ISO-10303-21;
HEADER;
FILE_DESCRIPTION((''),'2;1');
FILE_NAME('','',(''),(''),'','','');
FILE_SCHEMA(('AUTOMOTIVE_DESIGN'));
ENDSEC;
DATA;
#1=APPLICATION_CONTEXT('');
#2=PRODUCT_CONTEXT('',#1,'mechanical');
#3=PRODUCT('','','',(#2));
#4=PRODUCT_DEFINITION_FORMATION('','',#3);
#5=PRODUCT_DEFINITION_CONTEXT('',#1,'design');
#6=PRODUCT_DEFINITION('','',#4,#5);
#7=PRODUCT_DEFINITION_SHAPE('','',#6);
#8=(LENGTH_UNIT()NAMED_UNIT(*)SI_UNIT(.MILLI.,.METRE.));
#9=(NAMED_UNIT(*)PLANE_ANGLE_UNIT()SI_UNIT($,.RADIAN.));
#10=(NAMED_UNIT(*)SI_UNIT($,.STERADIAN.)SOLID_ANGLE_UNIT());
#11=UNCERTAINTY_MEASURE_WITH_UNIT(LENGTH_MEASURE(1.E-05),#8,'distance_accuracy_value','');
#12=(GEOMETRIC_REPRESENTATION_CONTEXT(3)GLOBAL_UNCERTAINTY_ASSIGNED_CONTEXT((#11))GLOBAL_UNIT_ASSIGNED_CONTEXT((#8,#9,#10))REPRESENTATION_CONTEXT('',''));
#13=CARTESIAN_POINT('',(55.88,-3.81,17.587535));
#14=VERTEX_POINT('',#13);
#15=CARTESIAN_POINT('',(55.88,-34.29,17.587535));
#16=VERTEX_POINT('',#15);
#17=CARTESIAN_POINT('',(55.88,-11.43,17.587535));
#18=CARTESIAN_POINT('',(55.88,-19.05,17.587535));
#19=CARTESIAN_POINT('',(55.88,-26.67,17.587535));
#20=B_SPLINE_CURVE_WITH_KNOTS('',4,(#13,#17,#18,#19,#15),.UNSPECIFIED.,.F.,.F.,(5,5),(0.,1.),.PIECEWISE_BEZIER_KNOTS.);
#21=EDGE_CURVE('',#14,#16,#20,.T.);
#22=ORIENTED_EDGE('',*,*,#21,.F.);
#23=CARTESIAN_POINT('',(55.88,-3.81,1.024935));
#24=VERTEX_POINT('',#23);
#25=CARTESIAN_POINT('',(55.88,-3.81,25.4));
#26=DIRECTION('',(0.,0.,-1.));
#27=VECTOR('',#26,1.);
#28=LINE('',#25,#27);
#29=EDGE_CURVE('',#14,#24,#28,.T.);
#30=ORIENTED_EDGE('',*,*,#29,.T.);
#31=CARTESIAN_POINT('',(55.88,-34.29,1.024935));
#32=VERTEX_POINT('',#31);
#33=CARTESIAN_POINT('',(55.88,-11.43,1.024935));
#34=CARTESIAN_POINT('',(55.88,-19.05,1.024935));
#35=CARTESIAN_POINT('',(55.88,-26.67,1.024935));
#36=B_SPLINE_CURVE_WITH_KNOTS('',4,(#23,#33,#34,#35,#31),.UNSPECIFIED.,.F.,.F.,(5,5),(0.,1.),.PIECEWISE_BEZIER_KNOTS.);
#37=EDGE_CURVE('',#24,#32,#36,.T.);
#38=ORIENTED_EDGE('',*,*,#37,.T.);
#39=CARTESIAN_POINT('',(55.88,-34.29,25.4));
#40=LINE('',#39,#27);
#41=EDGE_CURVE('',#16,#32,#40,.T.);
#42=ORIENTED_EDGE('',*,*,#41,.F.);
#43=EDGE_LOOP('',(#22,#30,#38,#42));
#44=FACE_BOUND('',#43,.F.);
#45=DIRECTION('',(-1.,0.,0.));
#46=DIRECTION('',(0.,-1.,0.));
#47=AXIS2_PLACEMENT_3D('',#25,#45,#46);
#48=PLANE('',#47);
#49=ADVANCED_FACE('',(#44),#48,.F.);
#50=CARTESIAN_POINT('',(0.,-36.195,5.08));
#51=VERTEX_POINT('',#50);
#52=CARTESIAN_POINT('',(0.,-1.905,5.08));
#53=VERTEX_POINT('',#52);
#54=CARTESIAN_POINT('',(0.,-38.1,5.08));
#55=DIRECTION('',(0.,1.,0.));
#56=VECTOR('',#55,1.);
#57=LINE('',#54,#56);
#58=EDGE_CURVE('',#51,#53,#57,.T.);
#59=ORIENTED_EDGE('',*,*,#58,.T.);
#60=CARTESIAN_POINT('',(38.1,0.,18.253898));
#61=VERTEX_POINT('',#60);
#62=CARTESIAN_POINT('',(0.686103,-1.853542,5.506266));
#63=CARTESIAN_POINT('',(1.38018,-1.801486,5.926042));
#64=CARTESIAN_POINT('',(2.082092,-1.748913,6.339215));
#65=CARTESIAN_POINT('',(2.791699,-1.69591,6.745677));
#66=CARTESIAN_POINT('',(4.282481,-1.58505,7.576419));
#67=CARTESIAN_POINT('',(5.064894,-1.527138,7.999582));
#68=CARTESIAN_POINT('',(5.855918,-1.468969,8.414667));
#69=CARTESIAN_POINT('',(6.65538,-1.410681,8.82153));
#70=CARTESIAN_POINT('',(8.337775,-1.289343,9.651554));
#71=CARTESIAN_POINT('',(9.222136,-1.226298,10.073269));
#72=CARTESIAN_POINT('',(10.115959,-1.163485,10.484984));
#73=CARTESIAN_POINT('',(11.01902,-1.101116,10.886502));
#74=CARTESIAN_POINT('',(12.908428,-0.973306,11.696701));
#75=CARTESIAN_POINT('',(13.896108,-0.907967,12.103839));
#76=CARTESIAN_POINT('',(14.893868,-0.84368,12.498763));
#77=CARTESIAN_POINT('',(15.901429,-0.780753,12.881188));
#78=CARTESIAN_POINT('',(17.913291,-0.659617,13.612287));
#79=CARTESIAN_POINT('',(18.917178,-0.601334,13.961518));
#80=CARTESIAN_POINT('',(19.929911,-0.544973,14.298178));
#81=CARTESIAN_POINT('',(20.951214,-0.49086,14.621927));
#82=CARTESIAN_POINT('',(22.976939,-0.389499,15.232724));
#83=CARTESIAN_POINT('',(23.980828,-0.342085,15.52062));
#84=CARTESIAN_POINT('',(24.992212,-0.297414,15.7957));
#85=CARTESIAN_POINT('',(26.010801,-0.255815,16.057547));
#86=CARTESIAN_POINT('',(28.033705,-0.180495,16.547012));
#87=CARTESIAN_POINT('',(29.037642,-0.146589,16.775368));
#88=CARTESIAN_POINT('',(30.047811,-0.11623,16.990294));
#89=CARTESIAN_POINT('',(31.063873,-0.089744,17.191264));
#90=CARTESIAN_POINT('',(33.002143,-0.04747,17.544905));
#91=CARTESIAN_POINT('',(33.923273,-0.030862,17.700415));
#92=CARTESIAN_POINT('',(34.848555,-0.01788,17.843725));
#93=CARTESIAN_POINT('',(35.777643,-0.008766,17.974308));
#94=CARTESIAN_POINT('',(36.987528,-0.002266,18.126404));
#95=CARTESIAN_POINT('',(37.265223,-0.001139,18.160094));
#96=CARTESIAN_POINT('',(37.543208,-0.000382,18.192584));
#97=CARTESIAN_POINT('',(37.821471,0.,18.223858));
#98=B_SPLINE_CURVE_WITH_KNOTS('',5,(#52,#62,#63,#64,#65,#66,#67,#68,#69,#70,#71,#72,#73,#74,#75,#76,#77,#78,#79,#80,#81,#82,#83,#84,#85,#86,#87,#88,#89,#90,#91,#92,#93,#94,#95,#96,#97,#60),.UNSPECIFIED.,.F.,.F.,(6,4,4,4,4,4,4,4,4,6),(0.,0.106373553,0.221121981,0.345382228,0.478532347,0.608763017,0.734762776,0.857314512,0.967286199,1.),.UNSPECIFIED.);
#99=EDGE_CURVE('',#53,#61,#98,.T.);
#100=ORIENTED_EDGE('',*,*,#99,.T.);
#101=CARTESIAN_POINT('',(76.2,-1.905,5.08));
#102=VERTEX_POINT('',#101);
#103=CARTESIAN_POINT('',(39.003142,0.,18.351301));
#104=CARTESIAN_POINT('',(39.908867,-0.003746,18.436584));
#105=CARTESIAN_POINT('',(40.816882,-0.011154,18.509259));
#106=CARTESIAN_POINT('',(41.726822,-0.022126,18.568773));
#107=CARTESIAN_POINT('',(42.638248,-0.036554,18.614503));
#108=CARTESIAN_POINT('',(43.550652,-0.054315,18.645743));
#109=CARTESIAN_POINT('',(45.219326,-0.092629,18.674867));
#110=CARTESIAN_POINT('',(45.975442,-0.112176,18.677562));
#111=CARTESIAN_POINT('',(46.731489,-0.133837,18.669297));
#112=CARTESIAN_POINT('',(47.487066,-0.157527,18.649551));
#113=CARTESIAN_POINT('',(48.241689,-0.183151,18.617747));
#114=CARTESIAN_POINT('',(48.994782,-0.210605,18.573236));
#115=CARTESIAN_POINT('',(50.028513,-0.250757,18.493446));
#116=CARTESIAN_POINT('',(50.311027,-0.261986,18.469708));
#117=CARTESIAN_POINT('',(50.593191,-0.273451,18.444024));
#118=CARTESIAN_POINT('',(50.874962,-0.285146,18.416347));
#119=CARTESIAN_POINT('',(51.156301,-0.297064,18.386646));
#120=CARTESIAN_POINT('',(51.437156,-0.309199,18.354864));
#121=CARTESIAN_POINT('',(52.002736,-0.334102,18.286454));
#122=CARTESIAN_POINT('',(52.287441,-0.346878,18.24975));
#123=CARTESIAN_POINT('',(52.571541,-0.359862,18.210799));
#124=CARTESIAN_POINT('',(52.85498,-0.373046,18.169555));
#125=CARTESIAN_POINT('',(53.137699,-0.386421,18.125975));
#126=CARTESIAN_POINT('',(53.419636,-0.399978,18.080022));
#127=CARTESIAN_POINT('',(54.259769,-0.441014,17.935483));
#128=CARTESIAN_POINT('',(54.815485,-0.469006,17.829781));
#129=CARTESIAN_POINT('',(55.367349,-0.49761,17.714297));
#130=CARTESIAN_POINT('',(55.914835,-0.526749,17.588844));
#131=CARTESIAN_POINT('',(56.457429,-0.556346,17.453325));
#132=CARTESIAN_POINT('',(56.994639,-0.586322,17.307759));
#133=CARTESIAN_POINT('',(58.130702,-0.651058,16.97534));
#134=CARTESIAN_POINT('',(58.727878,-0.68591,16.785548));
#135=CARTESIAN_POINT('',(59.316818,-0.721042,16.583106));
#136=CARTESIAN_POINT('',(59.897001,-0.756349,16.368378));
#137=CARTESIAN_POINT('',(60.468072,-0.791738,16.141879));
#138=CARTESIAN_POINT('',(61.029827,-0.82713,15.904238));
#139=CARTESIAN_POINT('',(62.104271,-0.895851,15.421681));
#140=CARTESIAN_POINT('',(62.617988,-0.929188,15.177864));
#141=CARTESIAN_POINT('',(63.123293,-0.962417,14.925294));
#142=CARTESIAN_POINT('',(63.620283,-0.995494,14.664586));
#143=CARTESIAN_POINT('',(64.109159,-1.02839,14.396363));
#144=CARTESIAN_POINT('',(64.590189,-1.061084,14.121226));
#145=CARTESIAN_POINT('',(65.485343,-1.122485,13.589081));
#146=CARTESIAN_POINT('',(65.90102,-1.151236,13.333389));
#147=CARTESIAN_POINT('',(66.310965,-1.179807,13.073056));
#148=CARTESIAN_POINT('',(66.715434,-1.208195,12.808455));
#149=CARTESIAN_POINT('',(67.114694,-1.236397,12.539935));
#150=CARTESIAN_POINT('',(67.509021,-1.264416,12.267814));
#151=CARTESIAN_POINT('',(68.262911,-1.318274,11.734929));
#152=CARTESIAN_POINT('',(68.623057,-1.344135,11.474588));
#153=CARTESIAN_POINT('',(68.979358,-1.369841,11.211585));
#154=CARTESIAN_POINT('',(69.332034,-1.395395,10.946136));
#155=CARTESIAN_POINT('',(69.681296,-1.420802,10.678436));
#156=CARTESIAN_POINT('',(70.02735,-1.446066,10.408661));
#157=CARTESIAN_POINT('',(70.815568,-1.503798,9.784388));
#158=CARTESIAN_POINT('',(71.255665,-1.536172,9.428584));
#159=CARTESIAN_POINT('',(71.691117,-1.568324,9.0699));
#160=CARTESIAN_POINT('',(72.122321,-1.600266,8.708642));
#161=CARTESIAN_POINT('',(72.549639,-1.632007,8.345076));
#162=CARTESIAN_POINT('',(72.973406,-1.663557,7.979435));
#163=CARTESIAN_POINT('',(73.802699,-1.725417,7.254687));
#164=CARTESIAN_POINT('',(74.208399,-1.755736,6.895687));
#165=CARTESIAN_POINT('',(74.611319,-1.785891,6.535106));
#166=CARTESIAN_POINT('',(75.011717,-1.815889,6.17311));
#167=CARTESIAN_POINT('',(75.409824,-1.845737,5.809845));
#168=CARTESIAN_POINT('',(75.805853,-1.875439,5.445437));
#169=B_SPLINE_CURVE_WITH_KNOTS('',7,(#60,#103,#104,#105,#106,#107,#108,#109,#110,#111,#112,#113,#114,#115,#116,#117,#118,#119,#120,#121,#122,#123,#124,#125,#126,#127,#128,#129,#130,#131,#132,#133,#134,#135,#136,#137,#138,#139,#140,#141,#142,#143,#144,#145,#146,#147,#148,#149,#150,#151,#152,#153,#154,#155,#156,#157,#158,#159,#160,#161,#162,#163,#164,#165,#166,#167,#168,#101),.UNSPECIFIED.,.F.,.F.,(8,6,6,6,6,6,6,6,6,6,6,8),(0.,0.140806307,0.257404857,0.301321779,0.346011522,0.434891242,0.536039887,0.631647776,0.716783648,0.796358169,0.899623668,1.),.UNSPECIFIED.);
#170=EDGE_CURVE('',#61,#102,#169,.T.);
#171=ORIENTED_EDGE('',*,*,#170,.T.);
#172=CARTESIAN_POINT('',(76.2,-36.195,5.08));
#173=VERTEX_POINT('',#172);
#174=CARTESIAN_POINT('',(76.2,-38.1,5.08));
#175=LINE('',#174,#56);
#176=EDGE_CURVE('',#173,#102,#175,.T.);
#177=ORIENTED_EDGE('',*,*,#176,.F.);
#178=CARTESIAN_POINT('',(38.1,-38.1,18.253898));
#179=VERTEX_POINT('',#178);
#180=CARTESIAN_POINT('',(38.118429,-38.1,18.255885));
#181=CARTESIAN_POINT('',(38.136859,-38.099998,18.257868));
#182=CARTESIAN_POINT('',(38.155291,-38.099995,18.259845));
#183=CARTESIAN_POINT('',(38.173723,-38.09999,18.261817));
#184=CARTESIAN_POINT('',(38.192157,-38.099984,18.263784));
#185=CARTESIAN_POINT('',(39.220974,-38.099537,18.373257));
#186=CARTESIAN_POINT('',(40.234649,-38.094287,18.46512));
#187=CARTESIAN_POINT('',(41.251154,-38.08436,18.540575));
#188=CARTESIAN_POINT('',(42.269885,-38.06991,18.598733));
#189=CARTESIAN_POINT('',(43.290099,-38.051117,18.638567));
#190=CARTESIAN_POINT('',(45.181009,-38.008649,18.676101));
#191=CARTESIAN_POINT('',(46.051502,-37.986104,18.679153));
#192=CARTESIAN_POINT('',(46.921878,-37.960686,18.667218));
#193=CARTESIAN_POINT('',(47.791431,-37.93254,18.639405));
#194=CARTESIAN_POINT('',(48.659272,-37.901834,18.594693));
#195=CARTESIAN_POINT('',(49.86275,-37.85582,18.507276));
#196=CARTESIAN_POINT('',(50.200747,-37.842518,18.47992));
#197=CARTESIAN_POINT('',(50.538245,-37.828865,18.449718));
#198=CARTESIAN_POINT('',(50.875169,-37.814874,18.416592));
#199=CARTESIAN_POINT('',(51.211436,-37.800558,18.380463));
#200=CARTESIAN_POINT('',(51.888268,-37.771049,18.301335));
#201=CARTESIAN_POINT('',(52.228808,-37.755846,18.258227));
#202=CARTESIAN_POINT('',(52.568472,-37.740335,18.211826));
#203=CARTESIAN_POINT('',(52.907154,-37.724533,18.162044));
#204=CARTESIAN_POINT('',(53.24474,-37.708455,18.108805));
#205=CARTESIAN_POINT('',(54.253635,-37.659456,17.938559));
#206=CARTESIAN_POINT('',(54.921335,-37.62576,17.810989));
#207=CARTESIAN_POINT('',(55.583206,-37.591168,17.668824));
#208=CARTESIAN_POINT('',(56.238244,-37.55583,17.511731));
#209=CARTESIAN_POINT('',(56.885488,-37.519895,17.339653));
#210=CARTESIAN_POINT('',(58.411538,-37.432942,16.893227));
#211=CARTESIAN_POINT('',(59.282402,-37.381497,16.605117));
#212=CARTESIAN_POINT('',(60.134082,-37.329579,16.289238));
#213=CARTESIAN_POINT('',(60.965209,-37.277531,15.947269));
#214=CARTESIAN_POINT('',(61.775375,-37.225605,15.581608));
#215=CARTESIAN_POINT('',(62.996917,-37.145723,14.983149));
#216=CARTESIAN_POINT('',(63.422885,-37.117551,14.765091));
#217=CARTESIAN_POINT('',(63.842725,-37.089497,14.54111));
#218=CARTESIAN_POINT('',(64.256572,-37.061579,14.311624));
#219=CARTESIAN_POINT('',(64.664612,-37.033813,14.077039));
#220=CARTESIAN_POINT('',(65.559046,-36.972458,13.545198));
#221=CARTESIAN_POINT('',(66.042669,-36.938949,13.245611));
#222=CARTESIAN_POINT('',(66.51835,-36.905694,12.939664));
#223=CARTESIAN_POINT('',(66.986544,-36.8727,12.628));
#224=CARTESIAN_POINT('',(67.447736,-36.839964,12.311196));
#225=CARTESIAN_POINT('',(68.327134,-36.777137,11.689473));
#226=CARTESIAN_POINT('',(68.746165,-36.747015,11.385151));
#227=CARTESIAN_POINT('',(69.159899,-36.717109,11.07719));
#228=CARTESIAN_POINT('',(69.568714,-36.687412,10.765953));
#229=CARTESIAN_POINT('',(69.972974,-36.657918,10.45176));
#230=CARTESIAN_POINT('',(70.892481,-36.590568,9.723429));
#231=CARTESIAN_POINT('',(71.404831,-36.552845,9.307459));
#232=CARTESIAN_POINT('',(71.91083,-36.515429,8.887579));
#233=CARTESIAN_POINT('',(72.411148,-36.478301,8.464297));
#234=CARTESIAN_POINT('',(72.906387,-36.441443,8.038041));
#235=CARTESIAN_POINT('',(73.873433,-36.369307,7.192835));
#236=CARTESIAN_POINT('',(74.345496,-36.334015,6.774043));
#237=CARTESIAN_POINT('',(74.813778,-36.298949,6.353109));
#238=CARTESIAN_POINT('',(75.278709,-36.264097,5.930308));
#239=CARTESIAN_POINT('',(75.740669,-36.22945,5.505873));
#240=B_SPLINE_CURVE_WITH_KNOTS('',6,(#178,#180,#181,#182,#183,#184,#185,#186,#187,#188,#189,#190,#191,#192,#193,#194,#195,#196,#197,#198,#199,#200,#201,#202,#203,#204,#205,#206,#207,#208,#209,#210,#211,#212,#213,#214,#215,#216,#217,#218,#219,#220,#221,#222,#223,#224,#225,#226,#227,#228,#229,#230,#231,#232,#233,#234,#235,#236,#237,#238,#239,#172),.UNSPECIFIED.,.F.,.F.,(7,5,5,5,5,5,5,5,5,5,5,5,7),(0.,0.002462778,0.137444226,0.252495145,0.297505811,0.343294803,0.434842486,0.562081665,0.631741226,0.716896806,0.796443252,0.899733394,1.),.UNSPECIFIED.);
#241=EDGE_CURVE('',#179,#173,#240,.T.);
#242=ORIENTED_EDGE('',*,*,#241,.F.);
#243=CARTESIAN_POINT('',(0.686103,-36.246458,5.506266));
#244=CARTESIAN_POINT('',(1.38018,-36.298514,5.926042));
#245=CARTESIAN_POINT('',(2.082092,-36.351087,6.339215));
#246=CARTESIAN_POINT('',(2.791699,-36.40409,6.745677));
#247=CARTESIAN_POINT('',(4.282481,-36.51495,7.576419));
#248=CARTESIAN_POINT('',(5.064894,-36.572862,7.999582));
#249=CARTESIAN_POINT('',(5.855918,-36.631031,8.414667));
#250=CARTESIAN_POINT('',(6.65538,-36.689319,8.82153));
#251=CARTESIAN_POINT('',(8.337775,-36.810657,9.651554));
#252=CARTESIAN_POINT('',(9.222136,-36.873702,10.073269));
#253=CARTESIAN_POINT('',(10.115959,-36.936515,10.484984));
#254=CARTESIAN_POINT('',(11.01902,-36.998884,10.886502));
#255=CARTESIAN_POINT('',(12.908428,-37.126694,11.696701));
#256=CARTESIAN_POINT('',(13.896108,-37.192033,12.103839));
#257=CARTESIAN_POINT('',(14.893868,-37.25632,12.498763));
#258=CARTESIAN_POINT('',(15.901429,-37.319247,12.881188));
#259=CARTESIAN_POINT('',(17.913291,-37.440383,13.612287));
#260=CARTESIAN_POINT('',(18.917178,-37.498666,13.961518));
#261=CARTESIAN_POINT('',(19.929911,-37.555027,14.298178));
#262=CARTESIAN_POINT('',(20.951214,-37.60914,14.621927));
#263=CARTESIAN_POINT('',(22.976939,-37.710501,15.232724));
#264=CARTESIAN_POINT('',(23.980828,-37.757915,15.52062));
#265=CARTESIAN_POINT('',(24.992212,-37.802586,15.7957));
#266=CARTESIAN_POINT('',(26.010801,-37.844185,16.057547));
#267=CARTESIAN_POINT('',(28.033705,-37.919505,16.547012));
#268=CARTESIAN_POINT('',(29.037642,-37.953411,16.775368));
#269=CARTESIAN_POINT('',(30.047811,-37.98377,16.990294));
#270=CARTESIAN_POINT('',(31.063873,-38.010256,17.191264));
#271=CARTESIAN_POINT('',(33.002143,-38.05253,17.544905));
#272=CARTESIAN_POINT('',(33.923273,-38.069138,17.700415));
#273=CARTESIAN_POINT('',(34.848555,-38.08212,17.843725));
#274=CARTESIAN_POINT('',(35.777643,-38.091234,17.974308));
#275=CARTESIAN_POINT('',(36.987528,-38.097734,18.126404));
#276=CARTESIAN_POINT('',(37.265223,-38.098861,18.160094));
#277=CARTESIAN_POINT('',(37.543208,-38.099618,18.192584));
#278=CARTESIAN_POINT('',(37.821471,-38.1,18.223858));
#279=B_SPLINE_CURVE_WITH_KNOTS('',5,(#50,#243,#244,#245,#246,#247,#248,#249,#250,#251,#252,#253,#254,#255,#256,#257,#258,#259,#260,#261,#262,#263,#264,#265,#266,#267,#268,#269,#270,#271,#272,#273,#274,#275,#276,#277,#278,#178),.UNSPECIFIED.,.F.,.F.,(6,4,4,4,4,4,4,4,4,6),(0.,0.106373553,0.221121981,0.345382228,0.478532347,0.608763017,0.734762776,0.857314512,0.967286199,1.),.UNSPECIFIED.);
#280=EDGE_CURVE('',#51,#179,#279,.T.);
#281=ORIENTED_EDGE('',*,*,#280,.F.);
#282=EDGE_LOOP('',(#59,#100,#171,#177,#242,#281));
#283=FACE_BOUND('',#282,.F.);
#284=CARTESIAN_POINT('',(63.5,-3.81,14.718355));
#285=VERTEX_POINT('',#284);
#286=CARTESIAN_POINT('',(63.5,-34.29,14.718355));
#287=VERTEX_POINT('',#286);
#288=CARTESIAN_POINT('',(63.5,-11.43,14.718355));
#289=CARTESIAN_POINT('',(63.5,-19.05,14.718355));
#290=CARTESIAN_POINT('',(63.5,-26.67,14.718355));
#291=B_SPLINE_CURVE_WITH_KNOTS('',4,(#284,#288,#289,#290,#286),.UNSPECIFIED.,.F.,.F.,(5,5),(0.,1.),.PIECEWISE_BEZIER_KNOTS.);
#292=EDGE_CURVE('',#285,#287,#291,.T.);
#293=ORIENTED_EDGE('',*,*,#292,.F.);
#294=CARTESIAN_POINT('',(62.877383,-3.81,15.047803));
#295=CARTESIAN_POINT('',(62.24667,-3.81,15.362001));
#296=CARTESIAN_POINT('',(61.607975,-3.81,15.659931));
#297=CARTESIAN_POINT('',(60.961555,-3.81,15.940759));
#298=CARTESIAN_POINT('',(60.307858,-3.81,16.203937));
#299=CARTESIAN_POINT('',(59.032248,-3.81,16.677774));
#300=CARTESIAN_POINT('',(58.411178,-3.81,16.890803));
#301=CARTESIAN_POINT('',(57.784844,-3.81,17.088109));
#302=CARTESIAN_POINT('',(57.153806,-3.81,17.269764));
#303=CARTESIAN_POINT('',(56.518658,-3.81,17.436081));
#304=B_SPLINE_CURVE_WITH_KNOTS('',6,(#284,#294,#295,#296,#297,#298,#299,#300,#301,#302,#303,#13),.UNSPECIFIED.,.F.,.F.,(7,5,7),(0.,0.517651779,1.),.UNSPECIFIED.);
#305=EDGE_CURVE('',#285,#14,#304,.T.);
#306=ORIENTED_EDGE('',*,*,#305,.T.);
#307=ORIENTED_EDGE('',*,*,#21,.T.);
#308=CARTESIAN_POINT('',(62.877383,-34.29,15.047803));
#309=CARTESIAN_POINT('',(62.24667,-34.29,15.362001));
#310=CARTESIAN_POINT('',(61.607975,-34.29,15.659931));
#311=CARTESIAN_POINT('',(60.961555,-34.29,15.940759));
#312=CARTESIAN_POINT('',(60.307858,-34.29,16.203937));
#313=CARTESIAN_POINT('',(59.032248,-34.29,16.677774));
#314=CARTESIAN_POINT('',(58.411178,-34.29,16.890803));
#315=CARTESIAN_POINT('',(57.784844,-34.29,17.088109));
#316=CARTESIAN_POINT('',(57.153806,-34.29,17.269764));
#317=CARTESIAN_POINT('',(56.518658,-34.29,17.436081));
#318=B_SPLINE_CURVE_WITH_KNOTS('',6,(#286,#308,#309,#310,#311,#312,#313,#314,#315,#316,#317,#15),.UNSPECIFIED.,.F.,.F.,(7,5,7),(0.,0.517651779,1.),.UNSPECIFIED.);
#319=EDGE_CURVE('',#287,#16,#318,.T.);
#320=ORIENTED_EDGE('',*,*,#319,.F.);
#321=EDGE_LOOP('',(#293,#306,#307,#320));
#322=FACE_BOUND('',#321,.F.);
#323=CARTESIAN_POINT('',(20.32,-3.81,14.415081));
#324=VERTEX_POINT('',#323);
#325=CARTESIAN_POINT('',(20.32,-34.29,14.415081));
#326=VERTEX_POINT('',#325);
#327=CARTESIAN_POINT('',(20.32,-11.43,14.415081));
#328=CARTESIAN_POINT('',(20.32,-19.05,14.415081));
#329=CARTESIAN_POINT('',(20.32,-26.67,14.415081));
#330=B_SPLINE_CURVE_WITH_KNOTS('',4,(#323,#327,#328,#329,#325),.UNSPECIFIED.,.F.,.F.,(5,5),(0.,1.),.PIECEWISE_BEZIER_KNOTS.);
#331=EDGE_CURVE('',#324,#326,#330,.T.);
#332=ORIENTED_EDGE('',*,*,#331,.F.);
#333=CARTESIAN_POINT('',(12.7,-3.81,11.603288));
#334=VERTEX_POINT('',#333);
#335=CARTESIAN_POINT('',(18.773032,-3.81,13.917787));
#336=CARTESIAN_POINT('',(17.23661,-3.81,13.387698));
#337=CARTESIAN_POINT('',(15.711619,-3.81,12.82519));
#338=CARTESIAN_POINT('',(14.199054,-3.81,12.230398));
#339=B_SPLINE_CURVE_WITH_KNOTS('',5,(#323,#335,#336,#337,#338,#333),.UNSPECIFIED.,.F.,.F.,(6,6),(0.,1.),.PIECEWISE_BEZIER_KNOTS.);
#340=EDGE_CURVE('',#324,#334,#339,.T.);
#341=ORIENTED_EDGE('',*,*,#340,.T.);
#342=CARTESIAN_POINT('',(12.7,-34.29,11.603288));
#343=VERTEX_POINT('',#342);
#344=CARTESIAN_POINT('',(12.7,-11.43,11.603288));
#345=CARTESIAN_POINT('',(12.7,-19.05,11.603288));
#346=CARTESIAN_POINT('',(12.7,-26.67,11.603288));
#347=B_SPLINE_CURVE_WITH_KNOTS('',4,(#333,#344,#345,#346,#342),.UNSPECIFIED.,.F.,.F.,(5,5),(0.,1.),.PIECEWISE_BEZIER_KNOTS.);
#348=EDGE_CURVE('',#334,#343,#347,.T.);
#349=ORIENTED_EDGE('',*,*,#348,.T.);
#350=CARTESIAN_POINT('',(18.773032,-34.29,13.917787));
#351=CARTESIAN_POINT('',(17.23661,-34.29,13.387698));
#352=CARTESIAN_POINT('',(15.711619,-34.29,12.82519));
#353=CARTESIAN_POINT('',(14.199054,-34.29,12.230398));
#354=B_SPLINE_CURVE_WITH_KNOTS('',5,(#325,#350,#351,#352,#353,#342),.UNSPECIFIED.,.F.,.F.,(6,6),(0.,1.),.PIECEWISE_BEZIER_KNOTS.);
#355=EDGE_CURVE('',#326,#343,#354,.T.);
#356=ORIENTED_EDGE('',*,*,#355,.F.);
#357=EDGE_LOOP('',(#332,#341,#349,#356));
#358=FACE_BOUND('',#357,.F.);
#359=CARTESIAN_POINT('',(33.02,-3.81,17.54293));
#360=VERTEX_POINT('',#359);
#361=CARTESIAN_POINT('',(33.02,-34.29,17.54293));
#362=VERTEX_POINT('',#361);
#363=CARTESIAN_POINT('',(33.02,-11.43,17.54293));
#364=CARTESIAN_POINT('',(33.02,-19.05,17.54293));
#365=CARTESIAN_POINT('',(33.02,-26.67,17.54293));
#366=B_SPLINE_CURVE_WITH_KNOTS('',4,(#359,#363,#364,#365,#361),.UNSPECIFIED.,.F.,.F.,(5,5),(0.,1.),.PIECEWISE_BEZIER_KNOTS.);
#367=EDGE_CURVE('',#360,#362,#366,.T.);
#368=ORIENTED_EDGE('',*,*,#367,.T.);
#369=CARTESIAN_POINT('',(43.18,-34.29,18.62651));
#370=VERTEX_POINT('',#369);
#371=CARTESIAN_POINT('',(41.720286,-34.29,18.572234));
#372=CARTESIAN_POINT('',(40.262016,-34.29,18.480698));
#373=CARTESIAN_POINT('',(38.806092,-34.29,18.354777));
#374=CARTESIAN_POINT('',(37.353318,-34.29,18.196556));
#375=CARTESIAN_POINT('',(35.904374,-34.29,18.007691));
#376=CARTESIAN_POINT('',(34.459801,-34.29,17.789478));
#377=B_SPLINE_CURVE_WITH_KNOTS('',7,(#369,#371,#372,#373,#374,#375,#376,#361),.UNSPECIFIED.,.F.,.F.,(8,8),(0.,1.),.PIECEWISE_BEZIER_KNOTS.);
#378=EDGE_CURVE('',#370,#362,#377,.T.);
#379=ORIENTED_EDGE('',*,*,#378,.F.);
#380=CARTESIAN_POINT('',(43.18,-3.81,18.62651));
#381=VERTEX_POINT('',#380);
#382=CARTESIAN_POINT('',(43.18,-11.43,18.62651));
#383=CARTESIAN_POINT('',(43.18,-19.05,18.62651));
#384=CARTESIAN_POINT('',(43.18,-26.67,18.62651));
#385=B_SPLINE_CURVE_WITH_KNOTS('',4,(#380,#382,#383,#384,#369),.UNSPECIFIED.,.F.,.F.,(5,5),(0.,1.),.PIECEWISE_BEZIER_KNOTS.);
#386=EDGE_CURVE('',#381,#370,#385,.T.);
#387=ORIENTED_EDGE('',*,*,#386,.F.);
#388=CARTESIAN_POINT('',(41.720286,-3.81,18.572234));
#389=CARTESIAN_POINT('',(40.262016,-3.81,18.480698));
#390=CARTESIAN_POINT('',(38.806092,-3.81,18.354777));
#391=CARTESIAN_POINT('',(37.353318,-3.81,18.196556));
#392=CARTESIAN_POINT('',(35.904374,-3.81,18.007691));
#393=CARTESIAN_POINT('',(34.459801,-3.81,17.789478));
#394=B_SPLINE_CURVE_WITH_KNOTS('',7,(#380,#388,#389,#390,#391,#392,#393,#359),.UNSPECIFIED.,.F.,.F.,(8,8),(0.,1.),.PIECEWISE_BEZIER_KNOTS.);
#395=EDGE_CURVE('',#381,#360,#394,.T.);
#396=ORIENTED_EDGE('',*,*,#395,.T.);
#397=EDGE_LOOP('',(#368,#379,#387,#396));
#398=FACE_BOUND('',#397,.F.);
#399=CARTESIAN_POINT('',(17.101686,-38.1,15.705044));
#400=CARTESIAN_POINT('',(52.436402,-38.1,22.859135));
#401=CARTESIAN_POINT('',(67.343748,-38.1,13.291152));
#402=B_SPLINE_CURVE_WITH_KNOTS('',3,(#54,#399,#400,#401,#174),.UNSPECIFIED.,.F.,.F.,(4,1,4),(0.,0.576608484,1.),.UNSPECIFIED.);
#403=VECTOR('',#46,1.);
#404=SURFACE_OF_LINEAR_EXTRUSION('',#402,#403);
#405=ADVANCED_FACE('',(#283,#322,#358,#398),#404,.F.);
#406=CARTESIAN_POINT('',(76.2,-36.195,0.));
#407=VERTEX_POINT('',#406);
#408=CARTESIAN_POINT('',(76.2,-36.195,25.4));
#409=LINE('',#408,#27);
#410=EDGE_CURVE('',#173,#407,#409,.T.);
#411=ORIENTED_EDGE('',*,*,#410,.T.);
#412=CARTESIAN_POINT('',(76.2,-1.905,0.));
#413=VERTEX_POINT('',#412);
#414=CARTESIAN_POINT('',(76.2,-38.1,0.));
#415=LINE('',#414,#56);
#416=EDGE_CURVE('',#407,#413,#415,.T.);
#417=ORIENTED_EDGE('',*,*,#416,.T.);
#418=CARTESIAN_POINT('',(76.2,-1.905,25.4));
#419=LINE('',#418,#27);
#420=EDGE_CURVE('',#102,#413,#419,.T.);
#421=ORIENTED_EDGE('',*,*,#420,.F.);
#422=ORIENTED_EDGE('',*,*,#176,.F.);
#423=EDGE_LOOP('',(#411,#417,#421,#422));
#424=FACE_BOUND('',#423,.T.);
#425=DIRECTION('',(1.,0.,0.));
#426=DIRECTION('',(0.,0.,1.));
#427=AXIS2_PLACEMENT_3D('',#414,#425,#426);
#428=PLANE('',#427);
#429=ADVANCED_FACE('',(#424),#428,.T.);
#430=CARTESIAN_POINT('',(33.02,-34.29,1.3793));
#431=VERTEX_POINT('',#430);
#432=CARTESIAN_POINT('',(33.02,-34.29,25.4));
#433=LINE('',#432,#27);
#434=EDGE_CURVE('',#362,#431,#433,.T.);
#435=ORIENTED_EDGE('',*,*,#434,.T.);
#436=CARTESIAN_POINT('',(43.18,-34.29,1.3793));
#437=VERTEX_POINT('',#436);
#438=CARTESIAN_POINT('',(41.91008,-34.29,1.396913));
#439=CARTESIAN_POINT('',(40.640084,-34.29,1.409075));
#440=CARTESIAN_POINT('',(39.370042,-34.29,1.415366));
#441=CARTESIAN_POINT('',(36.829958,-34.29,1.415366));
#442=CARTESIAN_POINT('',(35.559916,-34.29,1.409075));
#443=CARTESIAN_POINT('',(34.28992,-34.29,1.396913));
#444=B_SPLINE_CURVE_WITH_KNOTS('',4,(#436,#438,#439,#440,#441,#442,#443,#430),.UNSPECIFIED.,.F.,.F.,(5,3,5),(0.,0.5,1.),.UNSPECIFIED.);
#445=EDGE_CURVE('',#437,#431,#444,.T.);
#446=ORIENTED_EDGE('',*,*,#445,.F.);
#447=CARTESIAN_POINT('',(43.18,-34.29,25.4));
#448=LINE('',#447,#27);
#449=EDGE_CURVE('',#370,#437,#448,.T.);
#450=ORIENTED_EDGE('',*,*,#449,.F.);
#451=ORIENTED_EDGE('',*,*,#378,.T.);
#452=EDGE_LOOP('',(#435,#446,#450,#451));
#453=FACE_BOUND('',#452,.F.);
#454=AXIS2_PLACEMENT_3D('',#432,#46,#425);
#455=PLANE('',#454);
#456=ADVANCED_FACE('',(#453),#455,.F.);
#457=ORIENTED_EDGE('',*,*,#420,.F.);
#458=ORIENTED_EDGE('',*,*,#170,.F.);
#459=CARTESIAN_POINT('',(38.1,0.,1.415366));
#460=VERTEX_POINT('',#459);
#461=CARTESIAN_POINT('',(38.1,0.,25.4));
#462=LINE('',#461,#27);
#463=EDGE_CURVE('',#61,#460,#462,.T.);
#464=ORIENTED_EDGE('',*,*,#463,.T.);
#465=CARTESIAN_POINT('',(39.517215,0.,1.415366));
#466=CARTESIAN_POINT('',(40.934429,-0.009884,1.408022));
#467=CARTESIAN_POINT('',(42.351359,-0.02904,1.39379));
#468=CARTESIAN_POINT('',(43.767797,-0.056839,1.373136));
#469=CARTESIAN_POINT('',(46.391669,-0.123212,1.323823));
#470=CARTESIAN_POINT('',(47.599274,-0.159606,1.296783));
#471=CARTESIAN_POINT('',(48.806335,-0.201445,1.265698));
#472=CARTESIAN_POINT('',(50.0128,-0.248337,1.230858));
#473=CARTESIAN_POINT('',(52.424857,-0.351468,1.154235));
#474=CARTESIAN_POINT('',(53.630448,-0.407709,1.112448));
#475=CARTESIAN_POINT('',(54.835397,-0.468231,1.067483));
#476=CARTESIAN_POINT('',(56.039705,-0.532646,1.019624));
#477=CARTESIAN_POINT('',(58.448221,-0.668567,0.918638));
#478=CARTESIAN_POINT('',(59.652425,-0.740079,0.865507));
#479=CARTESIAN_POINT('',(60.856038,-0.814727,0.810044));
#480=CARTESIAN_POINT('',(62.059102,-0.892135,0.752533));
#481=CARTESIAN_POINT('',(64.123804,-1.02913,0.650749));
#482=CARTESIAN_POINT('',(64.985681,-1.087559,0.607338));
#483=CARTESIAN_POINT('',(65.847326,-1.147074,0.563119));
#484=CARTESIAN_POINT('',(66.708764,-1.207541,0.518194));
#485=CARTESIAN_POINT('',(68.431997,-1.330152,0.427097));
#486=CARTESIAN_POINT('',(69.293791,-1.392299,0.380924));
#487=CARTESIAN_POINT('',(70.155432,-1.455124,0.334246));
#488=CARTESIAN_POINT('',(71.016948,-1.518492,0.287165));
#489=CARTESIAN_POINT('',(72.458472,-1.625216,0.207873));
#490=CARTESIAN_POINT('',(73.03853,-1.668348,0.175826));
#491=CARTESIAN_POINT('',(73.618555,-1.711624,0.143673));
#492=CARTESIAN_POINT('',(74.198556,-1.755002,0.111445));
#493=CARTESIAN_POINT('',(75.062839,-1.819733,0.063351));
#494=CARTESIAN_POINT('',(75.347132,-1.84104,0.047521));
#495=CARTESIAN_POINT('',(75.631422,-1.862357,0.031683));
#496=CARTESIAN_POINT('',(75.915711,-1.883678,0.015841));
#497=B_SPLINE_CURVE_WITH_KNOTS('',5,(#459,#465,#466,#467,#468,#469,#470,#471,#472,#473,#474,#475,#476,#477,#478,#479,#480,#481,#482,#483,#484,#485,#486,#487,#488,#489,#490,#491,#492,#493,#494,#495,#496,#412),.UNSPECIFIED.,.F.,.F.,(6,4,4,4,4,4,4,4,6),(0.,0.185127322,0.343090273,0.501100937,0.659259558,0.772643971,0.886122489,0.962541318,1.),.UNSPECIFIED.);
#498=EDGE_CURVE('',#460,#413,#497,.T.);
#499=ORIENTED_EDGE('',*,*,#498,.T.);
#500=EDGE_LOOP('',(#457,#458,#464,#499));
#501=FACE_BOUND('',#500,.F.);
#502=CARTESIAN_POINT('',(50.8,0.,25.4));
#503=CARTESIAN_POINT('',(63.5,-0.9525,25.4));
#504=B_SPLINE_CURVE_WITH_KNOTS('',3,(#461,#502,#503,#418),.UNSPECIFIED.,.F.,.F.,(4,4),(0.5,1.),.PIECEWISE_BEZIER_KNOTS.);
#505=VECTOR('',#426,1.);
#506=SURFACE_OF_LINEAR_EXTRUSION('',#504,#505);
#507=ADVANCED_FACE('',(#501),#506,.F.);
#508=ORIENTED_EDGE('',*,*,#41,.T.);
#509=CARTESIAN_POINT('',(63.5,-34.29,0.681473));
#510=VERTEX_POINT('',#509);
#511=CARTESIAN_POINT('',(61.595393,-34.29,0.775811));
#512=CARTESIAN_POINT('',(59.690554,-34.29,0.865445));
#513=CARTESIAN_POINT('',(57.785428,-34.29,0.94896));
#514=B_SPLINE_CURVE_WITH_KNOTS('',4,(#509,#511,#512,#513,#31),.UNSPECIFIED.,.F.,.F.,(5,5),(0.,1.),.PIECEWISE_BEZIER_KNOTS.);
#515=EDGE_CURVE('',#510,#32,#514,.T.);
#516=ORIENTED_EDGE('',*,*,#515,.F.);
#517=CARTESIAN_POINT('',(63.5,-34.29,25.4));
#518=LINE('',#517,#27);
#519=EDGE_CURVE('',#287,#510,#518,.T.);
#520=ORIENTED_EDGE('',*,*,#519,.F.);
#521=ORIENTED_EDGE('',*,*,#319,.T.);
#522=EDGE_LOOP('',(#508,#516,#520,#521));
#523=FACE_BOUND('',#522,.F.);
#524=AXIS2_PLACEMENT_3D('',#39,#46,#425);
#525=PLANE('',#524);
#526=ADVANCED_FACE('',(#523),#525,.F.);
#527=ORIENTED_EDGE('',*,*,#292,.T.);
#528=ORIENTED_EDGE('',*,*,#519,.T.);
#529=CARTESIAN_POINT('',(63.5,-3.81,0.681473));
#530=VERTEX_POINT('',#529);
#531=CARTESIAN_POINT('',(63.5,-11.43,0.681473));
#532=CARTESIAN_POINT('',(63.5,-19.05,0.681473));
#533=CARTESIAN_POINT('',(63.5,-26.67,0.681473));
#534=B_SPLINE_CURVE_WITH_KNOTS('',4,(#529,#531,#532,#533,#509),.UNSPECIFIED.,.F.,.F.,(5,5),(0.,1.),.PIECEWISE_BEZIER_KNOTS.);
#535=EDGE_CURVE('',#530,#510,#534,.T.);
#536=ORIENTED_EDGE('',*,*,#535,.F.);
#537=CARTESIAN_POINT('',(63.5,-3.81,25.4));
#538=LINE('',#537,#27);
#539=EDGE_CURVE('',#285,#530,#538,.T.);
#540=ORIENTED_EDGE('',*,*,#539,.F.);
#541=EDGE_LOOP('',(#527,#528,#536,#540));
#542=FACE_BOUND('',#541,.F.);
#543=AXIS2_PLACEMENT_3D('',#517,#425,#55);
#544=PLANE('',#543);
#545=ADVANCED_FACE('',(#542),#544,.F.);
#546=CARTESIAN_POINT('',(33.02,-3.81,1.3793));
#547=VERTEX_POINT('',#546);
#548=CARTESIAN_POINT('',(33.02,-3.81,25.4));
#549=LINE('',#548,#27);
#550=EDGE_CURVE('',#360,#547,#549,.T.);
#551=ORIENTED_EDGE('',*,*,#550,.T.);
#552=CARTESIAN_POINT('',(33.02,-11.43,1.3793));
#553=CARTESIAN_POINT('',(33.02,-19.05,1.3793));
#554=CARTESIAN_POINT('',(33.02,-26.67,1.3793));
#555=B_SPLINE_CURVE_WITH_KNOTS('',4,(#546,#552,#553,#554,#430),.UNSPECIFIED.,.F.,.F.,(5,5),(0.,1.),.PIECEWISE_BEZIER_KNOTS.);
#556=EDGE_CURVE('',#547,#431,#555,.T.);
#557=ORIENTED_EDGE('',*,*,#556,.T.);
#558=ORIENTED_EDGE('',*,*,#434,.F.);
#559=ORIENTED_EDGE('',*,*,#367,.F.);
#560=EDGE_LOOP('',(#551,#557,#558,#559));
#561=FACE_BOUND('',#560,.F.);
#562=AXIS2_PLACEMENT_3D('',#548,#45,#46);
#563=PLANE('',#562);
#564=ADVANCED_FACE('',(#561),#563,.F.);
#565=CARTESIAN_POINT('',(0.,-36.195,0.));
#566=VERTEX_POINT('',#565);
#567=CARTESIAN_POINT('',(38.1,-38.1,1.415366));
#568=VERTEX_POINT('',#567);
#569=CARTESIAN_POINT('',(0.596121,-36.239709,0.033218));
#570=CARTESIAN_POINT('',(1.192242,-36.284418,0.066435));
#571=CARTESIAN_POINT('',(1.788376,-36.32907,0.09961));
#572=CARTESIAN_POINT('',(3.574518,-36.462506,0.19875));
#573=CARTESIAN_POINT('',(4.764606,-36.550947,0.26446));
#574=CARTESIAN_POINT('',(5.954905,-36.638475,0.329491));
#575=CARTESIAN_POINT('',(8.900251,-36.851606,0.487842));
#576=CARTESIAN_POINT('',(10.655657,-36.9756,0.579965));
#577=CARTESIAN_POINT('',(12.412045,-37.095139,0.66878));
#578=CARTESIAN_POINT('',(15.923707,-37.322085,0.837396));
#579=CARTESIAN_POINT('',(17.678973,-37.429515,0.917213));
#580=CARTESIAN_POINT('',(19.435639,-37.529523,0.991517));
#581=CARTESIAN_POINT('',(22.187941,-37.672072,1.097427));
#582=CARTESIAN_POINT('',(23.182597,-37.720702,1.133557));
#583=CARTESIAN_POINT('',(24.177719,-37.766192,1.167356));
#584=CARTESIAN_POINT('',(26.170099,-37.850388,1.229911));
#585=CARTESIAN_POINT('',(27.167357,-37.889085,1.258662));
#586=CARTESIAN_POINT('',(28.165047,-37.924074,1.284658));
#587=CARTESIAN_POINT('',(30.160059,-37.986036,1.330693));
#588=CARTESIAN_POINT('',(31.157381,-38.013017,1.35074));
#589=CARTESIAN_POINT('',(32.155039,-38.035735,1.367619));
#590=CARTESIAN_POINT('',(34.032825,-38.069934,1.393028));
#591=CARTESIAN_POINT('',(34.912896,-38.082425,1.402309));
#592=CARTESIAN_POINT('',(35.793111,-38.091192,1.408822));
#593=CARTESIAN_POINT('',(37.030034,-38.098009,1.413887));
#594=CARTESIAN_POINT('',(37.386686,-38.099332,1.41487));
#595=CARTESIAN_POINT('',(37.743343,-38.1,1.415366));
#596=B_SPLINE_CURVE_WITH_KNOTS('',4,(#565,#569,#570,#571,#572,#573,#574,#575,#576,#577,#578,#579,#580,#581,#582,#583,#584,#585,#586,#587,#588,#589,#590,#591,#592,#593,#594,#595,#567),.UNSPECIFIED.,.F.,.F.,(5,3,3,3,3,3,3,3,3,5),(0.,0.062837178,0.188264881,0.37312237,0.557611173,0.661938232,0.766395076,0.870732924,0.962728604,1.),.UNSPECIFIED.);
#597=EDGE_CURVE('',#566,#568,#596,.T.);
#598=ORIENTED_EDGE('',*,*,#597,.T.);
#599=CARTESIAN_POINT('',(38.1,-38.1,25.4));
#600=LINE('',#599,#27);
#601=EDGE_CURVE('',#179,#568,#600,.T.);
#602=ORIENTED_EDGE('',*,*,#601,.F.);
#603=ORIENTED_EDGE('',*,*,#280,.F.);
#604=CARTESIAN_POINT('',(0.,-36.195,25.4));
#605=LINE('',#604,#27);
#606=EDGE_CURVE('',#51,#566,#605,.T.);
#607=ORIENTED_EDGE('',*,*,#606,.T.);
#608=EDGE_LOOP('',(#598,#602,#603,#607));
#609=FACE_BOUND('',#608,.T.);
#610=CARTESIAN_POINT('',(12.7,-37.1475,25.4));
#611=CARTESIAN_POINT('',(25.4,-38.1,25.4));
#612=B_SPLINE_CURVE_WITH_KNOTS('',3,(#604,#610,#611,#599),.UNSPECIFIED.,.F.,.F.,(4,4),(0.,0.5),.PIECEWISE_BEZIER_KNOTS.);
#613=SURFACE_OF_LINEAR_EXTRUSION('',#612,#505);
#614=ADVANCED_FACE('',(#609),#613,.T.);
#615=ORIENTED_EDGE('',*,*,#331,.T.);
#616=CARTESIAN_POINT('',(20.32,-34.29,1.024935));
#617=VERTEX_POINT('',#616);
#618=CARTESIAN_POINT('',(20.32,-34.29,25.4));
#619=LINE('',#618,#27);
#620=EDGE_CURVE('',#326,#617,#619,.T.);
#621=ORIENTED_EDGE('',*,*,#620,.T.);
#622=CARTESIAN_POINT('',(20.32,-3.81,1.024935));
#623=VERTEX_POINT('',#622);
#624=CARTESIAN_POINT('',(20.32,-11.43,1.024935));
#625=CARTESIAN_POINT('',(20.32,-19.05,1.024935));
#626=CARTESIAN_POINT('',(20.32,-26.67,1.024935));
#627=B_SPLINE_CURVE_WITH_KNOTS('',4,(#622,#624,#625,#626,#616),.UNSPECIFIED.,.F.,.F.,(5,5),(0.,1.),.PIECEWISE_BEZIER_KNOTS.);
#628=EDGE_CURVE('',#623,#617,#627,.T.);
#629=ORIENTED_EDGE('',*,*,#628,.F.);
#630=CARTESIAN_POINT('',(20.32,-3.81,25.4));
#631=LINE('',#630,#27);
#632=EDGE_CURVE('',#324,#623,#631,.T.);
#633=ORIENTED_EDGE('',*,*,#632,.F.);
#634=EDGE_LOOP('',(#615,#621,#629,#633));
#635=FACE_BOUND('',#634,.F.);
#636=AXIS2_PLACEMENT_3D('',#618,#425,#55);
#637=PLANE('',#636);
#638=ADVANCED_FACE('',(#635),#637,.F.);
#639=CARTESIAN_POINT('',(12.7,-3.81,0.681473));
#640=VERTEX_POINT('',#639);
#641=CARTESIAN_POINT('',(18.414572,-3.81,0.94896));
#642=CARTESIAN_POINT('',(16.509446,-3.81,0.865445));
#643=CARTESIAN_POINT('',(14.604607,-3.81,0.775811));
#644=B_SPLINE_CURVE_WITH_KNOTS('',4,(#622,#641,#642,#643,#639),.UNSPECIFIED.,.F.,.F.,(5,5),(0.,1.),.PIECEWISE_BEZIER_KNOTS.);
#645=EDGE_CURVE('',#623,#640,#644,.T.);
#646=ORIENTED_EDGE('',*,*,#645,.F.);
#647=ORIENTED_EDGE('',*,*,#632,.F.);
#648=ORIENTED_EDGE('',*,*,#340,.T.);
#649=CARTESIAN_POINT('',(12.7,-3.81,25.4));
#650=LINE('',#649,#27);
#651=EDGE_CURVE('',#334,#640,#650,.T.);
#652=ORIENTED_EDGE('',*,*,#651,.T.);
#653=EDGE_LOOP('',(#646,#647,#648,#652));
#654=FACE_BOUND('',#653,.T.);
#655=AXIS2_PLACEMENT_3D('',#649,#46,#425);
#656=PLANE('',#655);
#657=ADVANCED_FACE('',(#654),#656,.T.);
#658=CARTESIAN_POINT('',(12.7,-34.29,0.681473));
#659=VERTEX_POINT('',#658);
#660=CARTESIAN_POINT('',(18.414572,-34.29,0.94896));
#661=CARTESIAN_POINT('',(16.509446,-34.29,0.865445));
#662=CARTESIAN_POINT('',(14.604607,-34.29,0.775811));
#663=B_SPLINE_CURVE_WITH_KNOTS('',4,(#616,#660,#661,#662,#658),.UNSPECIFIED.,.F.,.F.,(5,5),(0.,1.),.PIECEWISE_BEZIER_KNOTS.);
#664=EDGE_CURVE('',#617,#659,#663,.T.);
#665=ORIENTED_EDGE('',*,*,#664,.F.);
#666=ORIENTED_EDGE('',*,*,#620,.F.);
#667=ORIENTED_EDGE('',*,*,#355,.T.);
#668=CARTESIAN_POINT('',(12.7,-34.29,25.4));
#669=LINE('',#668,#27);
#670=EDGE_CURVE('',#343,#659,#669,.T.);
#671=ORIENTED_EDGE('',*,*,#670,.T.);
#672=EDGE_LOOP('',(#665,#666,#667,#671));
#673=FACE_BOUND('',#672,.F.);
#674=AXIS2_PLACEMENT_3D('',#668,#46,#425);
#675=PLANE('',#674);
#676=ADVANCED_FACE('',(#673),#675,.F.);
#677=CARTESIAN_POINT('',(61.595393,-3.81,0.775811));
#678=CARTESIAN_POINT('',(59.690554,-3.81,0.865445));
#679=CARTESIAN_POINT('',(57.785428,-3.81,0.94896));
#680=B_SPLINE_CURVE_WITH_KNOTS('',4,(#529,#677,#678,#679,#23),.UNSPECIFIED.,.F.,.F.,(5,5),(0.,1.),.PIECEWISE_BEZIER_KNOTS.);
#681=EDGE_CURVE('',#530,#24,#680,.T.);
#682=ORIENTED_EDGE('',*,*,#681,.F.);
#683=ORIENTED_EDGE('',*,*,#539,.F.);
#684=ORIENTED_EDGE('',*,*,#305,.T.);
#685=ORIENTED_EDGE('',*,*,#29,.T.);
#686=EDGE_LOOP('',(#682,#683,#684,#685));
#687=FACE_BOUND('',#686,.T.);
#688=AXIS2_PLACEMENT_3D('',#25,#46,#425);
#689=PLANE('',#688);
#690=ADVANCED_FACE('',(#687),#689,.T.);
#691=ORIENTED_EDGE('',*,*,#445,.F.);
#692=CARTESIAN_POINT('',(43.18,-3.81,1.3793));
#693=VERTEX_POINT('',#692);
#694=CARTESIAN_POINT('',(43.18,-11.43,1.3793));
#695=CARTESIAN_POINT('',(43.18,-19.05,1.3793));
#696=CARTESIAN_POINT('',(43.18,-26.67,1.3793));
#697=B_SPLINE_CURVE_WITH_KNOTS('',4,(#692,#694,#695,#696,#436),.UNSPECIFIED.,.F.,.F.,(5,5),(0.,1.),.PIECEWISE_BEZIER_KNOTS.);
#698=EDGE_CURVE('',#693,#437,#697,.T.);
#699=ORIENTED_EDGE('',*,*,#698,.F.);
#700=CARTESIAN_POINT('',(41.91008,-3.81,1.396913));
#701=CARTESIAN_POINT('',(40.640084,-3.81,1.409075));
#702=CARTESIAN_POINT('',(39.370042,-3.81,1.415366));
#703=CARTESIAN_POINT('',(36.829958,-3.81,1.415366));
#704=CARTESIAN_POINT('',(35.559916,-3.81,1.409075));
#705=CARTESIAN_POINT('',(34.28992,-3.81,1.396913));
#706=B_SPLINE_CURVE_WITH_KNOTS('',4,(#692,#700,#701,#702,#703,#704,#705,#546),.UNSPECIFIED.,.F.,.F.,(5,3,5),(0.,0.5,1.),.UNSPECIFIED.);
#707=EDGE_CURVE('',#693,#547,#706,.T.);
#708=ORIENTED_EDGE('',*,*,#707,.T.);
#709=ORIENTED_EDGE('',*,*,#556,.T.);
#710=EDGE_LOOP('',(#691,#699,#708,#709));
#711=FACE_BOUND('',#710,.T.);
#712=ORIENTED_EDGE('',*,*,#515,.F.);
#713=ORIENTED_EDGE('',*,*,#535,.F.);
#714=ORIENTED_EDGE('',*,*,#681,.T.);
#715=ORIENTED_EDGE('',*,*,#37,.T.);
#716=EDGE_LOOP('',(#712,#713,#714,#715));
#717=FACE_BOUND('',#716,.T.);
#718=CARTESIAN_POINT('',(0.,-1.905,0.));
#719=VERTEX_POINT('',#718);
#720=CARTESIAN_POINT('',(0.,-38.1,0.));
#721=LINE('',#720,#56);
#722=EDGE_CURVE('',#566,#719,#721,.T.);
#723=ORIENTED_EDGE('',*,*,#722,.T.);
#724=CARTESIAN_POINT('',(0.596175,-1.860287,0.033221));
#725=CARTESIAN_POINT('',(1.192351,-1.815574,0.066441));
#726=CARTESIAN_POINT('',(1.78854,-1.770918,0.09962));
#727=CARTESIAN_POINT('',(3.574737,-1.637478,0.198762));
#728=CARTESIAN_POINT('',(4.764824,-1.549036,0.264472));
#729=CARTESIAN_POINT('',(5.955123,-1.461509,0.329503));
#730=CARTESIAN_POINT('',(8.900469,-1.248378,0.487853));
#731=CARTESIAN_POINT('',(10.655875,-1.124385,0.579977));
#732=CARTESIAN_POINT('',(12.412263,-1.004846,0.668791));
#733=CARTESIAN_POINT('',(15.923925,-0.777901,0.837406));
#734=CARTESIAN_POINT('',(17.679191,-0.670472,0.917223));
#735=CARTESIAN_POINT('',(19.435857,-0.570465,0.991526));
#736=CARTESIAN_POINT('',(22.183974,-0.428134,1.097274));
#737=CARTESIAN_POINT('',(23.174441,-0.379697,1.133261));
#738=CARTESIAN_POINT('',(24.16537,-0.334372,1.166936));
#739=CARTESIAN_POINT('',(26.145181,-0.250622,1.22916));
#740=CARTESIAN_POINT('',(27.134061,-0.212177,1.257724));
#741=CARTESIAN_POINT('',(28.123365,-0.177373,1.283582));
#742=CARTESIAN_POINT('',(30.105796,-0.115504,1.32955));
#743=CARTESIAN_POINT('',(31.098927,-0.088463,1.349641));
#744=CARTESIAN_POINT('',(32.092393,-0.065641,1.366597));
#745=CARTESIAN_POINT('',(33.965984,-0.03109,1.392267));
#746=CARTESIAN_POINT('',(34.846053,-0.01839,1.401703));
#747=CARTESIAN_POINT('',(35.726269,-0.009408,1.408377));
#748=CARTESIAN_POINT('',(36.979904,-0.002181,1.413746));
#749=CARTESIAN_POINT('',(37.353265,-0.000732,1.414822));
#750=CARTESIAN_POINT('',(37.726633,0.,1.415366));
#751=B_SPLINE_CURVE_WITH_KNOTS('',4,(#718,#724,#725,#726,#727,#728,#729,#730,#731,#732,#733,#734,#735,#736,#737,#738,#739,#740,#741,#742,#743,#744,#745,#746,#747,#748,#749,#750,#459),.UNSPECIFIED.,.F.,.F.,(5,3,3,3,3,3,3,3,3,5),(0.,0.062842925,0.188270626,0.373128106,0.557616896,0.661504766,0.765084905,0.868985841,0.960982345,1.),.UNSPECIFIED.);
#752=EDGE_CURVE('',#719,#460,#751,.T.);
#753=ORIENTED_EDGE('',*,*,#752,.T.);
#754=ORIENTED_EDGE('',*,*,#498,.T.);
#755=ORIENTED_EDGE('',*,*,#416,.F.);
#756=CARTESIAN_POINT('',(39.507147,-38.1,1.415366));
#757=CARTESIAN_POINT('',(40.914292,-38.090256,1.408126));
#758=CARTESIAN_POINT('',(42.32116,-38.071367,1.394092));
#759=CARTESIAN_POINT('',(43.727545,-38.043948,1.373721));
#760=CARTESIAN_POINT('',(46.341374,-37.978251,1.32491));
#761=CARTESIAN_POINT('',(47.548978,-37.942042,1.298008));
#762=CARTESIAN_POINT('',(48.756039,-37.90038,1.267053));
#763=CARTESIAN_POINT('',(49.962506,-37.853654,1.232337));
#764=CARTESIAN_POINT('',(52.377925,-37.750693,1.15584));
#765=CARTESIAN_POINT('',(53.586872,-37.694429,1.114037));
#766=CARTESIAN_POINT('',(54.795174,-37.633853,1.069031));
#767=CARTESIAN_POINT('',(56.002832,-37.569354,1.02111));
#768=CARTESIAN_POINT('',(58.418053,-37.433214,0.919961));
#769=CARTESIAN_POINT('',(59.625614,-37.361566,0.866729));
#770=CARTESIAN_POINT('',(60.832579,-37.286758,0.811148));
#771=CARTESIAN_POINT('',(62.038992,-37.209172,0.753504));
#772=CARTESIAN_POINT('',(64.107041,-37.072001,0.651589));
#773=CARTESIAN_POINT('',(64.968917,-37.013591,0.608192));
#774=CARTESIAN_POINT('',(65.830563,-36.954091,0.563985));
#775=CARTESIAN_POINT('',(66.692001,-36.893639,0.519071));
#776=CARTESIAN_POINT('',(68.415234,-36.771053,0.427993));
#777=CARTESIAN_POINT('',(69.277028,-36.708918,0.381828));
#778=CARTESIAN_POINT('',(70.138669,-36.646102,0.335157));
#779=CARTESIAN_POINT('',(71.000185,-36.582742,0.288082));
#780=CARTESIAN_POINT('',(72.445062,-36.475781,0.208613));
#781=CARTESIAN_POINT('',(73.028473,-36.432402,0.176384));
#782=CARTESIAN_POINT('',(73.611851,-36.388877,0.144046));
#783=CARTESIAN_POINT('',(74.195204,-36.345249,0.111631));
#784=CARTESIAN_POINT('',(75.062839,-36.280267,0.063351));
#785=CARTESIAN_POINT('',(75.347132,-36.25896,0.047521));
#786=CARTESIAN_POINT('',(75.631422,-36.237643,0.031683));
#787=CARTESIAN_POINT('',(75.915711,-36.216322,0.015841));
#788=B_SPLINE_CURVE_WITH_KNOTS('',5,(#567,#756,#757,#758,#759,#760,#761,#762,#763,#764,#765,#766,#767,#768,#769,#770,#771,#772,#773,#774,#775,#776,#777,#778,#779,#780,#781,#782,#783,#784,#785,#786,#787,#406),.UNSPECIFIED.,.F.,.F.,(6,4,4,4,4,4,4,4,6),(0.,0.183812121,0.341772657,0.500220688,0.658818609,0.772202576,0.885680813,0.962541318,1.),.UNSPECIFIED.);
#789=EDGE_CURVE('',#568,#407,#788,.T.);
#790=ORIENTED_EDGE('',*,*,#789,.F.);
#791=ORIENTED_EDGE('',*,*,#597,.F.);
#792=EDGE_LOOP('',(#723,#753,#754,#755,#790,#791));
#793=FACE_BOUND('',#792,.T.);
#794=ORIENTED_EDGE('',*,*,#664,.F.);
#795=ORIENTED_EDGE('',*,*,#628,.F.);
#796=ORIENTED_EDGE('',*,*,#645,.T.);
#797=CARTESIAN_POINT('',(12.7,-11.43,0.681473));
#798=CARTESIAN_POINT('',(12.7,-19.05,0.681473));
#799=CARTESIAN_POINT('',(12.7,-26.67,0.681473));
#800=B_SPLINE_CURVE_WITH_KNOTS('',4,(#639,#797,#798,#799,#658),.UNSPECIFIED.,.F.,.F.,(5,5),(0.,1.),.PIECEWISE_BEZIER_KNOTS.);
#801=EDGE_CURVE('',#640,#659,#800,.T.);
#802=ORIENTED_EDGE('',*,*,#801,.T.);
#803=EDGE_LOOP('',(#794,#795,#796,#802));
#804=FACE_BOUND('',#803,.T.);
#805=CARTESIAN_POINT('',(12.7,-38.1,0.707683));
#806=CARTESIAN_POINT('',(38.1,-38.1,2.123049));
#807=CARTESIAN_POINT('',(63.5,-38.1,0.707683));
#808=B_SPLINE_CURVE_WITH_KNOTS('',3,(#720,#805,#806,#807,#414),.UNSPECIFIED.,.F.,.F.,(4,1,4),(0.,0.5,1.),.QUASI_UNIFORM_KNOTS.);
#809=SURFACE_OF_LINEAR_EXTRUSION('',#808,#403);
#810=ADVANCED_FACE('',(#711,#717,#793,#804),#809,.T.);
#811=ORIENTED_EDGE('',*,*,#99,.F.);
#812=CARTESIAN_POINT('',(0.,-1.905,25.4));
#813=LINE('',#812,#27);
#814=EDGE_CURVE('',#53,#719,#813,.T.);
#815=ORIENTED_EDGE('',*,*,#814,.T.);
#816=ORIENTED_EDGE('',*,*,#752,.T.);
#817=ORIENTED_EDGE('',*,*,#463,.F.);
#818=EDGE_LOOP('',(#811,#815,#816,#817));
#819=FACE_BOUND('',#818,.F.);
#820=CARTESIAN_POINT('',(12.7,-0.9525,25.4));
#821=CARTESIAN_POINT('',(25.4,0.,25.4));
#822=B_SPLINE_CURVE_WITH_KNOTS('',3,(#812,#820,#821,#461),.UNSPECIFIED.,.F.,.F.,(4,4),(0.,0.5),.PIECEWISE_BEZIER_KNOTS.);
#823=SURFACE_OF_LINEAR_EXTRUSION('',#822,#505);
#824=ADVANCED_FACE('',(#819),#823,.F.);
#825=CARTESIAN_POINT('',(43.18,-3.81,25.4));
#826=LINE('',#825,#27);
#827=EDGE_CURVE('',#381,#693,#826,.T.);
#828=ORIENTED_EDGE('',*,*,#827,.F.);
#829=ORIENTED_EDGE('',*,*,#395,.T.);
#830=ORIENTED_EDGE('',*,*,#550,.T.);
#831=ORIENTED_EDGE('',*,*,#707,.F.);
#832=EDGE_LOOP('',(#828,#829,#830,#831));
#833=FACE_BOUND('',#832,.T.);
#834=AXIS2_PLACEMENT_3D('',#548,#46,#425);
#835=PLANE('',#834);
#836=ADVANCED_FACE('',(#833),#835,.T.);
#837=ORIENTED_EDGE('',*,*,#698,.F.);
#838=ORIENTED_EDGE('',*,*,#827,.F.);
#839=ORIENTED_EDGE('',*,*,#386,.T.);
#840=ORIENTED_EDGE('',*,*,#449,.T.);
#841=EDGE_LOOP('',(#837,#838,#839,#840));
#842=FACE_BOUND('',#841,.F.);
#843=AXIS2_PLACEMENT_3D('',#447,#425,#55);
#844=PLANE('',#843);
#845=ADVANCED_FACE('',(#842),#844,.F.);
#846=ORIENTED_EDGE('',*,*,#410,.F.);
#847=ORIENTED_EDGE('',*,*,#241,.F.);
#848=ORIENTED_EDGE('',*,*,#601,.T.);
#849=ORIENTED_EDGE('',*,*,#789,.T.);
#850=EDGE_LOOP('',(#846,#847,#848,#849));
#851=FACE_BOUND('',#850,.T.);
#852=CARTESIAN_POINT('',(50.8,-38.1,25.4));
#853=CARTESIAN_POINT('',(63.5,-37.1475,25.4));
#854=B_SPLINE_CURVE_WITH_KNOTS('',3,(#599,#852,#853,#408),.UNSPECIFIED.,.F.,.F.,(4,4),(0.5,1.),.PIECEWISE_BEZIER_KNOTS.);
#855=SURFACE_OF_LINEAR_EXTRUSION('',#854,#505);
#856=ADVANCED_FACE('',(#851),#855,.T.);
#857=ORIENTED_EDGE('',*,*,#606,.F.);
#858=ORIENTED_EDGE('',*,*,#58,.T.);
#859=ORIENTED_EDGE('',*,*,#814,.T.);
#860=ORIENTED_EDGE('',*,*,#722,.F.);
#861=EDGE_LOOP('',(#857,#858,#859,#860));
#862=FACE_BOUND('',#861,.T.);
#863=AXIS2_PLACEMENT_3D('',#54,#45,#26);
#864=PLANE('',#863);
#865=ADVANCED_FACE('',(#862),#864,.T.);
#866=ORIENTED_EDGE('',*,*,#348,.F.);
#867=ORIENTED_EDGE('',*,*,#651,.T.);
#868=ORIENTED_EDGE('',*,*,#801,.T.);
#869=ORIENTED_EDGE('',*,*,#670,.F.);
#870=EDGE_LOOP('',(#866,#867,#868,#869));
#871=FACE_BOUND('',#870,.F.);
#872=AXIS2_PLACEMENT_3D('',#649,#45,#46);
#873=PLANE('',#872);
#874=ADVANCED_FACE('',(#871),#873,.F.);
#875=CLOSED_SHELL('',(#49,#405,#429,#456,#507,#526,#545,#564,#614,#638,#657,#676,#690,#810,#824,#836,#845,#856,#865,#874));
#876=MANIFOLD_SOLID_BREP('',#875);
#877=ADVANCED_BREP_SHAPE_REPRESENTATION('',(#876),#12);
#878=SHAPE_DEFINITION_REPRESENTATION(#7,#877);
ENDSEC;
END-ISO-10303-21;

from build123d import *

# Parameters (mm, degrees)
F5_DEPTH  = 38.1
F8_DEPTH  = 30.734
F9_W      = 7.62
F9_H      = 15.24
F9_W_2    = 10.16
F10_DEPTH = 25.4


# Not quite as in the source:
# - a feature of the source that left no trace in its solid (it failed there, or was rolled back) is left out


with BuildPart() as f5:
    # F3 (on face) → F5 (new body)
    with BuildSketch(Plane.XZ.offset(38.1)):
        with BuildLine():
            Line((0, 5.08), (0, 0))
            add(Edge.make_bspline(
                [(0, 0), (12.7, 0.707683037), (38.1, 2.1230491111), (63.5, 0.707683037), (76.2, 0)],
                knots=[0, 0, 0, 0, 0.5, 1, 1, 1, 1], degree=3))
            Line((76.2, 0), (76.2, 5.08))
            add(Edge.make_bspline(
                [(0, 5.08), (17.1016856021, 15.7050435078), (52.4364024312, 22.8591352455), (67.3437483547, 13.2911519776), (76.2, 5.08)],
                knots=[0, 0, 0, 0, 0.5766084835, 1, 1, 1, 1], degree=3))
        make_face()
    extrude(amount=-F5_DEPTH)

    # F7 (on offset) → F8 (cut)
    with BuildSketch(Plane.XY.offset(25.4)):
        with BuildLine():
            Line((0, -38.1), (38.1, -38.1))
            add(Edge.make_bspline(
                [(0, -36.195), (12.7, -37.1475), (25.4, -38.1), (38.1, -38.1)],
                knots=[0, 0, 0, 0, 0.5, 0.5, 0.5, 0.5], degree=3))
            Line((0, -36.195), (0, -38.1))
        make_face()
        with BuildLine():
            add(Edge.make_bspline(
                [(38.1, -38.1), (50.8, -38.1), (63.5, -37.1475), (76.2, -36.195)],
                knots=[0.5, 0.5, 0.5, 0.5, 1, 1, 1, 1], degree=3))
            Line((38.1, -38.1), (76.2, -38.1))
            Line((76.2, -38.1), (76.2, -36.195))
        make_face()
        with BuildLine():
            Line((76.2, 0), (38.1, 0))
            add(Edge.make_bspline(
                [(38.1, 0), (50.8, 0), (63.5, -0.9525), (76.2, -1.905)],
                knots=[0.5, 0.5, 0.5, 0.5, 1, 1, 1, 1], degree=3))
            Line((76.2, -1.905), (76.2, 0))
        make_face()
        with BuildLine():
            Line((38.1, 0), (0, 0))
            Line((0, 0), (0, -1.905))
            add(Edge.make_bspline(
                [(0, -1.905), (12.7, -0.9525), (25.4, 0), (38.1, 0)],
                knots=[0, 0, 0, 0, 0.5, 0.5, 0.5, 0.5], degree=3))
        make_face()
    extrude(amount=-F8_DEPTH, mode=Mode.SUBTRACT)

    # F9 (on offset) → F10 (cut)
    with BuildSketch(Plane.XY.offset(25.4)):
        with Locations((59.69, -11.43)):
            Rectangle(F9_W, F9_H)
        with Locations((59.69, -26.67)):
            Rectangle(F9_W, F9_H)
        with Locations((38.1, -26.67)):
            Rectangle(F9_W_2, F9_H)
        with Locations((38.1, -11.43)):
            Rectangle(F9_W_2, F9_H)
        with Locations((16.51, -26.67)):
            Rectangle(F9_W, F9_H)
        with Locations((16.51, -11.43)):
            Rectangle(F9_W, F9_H)
    extrude(amount=-F10_DEPTH, mode=Mode.SUBTRACT)


solid = f5.part
